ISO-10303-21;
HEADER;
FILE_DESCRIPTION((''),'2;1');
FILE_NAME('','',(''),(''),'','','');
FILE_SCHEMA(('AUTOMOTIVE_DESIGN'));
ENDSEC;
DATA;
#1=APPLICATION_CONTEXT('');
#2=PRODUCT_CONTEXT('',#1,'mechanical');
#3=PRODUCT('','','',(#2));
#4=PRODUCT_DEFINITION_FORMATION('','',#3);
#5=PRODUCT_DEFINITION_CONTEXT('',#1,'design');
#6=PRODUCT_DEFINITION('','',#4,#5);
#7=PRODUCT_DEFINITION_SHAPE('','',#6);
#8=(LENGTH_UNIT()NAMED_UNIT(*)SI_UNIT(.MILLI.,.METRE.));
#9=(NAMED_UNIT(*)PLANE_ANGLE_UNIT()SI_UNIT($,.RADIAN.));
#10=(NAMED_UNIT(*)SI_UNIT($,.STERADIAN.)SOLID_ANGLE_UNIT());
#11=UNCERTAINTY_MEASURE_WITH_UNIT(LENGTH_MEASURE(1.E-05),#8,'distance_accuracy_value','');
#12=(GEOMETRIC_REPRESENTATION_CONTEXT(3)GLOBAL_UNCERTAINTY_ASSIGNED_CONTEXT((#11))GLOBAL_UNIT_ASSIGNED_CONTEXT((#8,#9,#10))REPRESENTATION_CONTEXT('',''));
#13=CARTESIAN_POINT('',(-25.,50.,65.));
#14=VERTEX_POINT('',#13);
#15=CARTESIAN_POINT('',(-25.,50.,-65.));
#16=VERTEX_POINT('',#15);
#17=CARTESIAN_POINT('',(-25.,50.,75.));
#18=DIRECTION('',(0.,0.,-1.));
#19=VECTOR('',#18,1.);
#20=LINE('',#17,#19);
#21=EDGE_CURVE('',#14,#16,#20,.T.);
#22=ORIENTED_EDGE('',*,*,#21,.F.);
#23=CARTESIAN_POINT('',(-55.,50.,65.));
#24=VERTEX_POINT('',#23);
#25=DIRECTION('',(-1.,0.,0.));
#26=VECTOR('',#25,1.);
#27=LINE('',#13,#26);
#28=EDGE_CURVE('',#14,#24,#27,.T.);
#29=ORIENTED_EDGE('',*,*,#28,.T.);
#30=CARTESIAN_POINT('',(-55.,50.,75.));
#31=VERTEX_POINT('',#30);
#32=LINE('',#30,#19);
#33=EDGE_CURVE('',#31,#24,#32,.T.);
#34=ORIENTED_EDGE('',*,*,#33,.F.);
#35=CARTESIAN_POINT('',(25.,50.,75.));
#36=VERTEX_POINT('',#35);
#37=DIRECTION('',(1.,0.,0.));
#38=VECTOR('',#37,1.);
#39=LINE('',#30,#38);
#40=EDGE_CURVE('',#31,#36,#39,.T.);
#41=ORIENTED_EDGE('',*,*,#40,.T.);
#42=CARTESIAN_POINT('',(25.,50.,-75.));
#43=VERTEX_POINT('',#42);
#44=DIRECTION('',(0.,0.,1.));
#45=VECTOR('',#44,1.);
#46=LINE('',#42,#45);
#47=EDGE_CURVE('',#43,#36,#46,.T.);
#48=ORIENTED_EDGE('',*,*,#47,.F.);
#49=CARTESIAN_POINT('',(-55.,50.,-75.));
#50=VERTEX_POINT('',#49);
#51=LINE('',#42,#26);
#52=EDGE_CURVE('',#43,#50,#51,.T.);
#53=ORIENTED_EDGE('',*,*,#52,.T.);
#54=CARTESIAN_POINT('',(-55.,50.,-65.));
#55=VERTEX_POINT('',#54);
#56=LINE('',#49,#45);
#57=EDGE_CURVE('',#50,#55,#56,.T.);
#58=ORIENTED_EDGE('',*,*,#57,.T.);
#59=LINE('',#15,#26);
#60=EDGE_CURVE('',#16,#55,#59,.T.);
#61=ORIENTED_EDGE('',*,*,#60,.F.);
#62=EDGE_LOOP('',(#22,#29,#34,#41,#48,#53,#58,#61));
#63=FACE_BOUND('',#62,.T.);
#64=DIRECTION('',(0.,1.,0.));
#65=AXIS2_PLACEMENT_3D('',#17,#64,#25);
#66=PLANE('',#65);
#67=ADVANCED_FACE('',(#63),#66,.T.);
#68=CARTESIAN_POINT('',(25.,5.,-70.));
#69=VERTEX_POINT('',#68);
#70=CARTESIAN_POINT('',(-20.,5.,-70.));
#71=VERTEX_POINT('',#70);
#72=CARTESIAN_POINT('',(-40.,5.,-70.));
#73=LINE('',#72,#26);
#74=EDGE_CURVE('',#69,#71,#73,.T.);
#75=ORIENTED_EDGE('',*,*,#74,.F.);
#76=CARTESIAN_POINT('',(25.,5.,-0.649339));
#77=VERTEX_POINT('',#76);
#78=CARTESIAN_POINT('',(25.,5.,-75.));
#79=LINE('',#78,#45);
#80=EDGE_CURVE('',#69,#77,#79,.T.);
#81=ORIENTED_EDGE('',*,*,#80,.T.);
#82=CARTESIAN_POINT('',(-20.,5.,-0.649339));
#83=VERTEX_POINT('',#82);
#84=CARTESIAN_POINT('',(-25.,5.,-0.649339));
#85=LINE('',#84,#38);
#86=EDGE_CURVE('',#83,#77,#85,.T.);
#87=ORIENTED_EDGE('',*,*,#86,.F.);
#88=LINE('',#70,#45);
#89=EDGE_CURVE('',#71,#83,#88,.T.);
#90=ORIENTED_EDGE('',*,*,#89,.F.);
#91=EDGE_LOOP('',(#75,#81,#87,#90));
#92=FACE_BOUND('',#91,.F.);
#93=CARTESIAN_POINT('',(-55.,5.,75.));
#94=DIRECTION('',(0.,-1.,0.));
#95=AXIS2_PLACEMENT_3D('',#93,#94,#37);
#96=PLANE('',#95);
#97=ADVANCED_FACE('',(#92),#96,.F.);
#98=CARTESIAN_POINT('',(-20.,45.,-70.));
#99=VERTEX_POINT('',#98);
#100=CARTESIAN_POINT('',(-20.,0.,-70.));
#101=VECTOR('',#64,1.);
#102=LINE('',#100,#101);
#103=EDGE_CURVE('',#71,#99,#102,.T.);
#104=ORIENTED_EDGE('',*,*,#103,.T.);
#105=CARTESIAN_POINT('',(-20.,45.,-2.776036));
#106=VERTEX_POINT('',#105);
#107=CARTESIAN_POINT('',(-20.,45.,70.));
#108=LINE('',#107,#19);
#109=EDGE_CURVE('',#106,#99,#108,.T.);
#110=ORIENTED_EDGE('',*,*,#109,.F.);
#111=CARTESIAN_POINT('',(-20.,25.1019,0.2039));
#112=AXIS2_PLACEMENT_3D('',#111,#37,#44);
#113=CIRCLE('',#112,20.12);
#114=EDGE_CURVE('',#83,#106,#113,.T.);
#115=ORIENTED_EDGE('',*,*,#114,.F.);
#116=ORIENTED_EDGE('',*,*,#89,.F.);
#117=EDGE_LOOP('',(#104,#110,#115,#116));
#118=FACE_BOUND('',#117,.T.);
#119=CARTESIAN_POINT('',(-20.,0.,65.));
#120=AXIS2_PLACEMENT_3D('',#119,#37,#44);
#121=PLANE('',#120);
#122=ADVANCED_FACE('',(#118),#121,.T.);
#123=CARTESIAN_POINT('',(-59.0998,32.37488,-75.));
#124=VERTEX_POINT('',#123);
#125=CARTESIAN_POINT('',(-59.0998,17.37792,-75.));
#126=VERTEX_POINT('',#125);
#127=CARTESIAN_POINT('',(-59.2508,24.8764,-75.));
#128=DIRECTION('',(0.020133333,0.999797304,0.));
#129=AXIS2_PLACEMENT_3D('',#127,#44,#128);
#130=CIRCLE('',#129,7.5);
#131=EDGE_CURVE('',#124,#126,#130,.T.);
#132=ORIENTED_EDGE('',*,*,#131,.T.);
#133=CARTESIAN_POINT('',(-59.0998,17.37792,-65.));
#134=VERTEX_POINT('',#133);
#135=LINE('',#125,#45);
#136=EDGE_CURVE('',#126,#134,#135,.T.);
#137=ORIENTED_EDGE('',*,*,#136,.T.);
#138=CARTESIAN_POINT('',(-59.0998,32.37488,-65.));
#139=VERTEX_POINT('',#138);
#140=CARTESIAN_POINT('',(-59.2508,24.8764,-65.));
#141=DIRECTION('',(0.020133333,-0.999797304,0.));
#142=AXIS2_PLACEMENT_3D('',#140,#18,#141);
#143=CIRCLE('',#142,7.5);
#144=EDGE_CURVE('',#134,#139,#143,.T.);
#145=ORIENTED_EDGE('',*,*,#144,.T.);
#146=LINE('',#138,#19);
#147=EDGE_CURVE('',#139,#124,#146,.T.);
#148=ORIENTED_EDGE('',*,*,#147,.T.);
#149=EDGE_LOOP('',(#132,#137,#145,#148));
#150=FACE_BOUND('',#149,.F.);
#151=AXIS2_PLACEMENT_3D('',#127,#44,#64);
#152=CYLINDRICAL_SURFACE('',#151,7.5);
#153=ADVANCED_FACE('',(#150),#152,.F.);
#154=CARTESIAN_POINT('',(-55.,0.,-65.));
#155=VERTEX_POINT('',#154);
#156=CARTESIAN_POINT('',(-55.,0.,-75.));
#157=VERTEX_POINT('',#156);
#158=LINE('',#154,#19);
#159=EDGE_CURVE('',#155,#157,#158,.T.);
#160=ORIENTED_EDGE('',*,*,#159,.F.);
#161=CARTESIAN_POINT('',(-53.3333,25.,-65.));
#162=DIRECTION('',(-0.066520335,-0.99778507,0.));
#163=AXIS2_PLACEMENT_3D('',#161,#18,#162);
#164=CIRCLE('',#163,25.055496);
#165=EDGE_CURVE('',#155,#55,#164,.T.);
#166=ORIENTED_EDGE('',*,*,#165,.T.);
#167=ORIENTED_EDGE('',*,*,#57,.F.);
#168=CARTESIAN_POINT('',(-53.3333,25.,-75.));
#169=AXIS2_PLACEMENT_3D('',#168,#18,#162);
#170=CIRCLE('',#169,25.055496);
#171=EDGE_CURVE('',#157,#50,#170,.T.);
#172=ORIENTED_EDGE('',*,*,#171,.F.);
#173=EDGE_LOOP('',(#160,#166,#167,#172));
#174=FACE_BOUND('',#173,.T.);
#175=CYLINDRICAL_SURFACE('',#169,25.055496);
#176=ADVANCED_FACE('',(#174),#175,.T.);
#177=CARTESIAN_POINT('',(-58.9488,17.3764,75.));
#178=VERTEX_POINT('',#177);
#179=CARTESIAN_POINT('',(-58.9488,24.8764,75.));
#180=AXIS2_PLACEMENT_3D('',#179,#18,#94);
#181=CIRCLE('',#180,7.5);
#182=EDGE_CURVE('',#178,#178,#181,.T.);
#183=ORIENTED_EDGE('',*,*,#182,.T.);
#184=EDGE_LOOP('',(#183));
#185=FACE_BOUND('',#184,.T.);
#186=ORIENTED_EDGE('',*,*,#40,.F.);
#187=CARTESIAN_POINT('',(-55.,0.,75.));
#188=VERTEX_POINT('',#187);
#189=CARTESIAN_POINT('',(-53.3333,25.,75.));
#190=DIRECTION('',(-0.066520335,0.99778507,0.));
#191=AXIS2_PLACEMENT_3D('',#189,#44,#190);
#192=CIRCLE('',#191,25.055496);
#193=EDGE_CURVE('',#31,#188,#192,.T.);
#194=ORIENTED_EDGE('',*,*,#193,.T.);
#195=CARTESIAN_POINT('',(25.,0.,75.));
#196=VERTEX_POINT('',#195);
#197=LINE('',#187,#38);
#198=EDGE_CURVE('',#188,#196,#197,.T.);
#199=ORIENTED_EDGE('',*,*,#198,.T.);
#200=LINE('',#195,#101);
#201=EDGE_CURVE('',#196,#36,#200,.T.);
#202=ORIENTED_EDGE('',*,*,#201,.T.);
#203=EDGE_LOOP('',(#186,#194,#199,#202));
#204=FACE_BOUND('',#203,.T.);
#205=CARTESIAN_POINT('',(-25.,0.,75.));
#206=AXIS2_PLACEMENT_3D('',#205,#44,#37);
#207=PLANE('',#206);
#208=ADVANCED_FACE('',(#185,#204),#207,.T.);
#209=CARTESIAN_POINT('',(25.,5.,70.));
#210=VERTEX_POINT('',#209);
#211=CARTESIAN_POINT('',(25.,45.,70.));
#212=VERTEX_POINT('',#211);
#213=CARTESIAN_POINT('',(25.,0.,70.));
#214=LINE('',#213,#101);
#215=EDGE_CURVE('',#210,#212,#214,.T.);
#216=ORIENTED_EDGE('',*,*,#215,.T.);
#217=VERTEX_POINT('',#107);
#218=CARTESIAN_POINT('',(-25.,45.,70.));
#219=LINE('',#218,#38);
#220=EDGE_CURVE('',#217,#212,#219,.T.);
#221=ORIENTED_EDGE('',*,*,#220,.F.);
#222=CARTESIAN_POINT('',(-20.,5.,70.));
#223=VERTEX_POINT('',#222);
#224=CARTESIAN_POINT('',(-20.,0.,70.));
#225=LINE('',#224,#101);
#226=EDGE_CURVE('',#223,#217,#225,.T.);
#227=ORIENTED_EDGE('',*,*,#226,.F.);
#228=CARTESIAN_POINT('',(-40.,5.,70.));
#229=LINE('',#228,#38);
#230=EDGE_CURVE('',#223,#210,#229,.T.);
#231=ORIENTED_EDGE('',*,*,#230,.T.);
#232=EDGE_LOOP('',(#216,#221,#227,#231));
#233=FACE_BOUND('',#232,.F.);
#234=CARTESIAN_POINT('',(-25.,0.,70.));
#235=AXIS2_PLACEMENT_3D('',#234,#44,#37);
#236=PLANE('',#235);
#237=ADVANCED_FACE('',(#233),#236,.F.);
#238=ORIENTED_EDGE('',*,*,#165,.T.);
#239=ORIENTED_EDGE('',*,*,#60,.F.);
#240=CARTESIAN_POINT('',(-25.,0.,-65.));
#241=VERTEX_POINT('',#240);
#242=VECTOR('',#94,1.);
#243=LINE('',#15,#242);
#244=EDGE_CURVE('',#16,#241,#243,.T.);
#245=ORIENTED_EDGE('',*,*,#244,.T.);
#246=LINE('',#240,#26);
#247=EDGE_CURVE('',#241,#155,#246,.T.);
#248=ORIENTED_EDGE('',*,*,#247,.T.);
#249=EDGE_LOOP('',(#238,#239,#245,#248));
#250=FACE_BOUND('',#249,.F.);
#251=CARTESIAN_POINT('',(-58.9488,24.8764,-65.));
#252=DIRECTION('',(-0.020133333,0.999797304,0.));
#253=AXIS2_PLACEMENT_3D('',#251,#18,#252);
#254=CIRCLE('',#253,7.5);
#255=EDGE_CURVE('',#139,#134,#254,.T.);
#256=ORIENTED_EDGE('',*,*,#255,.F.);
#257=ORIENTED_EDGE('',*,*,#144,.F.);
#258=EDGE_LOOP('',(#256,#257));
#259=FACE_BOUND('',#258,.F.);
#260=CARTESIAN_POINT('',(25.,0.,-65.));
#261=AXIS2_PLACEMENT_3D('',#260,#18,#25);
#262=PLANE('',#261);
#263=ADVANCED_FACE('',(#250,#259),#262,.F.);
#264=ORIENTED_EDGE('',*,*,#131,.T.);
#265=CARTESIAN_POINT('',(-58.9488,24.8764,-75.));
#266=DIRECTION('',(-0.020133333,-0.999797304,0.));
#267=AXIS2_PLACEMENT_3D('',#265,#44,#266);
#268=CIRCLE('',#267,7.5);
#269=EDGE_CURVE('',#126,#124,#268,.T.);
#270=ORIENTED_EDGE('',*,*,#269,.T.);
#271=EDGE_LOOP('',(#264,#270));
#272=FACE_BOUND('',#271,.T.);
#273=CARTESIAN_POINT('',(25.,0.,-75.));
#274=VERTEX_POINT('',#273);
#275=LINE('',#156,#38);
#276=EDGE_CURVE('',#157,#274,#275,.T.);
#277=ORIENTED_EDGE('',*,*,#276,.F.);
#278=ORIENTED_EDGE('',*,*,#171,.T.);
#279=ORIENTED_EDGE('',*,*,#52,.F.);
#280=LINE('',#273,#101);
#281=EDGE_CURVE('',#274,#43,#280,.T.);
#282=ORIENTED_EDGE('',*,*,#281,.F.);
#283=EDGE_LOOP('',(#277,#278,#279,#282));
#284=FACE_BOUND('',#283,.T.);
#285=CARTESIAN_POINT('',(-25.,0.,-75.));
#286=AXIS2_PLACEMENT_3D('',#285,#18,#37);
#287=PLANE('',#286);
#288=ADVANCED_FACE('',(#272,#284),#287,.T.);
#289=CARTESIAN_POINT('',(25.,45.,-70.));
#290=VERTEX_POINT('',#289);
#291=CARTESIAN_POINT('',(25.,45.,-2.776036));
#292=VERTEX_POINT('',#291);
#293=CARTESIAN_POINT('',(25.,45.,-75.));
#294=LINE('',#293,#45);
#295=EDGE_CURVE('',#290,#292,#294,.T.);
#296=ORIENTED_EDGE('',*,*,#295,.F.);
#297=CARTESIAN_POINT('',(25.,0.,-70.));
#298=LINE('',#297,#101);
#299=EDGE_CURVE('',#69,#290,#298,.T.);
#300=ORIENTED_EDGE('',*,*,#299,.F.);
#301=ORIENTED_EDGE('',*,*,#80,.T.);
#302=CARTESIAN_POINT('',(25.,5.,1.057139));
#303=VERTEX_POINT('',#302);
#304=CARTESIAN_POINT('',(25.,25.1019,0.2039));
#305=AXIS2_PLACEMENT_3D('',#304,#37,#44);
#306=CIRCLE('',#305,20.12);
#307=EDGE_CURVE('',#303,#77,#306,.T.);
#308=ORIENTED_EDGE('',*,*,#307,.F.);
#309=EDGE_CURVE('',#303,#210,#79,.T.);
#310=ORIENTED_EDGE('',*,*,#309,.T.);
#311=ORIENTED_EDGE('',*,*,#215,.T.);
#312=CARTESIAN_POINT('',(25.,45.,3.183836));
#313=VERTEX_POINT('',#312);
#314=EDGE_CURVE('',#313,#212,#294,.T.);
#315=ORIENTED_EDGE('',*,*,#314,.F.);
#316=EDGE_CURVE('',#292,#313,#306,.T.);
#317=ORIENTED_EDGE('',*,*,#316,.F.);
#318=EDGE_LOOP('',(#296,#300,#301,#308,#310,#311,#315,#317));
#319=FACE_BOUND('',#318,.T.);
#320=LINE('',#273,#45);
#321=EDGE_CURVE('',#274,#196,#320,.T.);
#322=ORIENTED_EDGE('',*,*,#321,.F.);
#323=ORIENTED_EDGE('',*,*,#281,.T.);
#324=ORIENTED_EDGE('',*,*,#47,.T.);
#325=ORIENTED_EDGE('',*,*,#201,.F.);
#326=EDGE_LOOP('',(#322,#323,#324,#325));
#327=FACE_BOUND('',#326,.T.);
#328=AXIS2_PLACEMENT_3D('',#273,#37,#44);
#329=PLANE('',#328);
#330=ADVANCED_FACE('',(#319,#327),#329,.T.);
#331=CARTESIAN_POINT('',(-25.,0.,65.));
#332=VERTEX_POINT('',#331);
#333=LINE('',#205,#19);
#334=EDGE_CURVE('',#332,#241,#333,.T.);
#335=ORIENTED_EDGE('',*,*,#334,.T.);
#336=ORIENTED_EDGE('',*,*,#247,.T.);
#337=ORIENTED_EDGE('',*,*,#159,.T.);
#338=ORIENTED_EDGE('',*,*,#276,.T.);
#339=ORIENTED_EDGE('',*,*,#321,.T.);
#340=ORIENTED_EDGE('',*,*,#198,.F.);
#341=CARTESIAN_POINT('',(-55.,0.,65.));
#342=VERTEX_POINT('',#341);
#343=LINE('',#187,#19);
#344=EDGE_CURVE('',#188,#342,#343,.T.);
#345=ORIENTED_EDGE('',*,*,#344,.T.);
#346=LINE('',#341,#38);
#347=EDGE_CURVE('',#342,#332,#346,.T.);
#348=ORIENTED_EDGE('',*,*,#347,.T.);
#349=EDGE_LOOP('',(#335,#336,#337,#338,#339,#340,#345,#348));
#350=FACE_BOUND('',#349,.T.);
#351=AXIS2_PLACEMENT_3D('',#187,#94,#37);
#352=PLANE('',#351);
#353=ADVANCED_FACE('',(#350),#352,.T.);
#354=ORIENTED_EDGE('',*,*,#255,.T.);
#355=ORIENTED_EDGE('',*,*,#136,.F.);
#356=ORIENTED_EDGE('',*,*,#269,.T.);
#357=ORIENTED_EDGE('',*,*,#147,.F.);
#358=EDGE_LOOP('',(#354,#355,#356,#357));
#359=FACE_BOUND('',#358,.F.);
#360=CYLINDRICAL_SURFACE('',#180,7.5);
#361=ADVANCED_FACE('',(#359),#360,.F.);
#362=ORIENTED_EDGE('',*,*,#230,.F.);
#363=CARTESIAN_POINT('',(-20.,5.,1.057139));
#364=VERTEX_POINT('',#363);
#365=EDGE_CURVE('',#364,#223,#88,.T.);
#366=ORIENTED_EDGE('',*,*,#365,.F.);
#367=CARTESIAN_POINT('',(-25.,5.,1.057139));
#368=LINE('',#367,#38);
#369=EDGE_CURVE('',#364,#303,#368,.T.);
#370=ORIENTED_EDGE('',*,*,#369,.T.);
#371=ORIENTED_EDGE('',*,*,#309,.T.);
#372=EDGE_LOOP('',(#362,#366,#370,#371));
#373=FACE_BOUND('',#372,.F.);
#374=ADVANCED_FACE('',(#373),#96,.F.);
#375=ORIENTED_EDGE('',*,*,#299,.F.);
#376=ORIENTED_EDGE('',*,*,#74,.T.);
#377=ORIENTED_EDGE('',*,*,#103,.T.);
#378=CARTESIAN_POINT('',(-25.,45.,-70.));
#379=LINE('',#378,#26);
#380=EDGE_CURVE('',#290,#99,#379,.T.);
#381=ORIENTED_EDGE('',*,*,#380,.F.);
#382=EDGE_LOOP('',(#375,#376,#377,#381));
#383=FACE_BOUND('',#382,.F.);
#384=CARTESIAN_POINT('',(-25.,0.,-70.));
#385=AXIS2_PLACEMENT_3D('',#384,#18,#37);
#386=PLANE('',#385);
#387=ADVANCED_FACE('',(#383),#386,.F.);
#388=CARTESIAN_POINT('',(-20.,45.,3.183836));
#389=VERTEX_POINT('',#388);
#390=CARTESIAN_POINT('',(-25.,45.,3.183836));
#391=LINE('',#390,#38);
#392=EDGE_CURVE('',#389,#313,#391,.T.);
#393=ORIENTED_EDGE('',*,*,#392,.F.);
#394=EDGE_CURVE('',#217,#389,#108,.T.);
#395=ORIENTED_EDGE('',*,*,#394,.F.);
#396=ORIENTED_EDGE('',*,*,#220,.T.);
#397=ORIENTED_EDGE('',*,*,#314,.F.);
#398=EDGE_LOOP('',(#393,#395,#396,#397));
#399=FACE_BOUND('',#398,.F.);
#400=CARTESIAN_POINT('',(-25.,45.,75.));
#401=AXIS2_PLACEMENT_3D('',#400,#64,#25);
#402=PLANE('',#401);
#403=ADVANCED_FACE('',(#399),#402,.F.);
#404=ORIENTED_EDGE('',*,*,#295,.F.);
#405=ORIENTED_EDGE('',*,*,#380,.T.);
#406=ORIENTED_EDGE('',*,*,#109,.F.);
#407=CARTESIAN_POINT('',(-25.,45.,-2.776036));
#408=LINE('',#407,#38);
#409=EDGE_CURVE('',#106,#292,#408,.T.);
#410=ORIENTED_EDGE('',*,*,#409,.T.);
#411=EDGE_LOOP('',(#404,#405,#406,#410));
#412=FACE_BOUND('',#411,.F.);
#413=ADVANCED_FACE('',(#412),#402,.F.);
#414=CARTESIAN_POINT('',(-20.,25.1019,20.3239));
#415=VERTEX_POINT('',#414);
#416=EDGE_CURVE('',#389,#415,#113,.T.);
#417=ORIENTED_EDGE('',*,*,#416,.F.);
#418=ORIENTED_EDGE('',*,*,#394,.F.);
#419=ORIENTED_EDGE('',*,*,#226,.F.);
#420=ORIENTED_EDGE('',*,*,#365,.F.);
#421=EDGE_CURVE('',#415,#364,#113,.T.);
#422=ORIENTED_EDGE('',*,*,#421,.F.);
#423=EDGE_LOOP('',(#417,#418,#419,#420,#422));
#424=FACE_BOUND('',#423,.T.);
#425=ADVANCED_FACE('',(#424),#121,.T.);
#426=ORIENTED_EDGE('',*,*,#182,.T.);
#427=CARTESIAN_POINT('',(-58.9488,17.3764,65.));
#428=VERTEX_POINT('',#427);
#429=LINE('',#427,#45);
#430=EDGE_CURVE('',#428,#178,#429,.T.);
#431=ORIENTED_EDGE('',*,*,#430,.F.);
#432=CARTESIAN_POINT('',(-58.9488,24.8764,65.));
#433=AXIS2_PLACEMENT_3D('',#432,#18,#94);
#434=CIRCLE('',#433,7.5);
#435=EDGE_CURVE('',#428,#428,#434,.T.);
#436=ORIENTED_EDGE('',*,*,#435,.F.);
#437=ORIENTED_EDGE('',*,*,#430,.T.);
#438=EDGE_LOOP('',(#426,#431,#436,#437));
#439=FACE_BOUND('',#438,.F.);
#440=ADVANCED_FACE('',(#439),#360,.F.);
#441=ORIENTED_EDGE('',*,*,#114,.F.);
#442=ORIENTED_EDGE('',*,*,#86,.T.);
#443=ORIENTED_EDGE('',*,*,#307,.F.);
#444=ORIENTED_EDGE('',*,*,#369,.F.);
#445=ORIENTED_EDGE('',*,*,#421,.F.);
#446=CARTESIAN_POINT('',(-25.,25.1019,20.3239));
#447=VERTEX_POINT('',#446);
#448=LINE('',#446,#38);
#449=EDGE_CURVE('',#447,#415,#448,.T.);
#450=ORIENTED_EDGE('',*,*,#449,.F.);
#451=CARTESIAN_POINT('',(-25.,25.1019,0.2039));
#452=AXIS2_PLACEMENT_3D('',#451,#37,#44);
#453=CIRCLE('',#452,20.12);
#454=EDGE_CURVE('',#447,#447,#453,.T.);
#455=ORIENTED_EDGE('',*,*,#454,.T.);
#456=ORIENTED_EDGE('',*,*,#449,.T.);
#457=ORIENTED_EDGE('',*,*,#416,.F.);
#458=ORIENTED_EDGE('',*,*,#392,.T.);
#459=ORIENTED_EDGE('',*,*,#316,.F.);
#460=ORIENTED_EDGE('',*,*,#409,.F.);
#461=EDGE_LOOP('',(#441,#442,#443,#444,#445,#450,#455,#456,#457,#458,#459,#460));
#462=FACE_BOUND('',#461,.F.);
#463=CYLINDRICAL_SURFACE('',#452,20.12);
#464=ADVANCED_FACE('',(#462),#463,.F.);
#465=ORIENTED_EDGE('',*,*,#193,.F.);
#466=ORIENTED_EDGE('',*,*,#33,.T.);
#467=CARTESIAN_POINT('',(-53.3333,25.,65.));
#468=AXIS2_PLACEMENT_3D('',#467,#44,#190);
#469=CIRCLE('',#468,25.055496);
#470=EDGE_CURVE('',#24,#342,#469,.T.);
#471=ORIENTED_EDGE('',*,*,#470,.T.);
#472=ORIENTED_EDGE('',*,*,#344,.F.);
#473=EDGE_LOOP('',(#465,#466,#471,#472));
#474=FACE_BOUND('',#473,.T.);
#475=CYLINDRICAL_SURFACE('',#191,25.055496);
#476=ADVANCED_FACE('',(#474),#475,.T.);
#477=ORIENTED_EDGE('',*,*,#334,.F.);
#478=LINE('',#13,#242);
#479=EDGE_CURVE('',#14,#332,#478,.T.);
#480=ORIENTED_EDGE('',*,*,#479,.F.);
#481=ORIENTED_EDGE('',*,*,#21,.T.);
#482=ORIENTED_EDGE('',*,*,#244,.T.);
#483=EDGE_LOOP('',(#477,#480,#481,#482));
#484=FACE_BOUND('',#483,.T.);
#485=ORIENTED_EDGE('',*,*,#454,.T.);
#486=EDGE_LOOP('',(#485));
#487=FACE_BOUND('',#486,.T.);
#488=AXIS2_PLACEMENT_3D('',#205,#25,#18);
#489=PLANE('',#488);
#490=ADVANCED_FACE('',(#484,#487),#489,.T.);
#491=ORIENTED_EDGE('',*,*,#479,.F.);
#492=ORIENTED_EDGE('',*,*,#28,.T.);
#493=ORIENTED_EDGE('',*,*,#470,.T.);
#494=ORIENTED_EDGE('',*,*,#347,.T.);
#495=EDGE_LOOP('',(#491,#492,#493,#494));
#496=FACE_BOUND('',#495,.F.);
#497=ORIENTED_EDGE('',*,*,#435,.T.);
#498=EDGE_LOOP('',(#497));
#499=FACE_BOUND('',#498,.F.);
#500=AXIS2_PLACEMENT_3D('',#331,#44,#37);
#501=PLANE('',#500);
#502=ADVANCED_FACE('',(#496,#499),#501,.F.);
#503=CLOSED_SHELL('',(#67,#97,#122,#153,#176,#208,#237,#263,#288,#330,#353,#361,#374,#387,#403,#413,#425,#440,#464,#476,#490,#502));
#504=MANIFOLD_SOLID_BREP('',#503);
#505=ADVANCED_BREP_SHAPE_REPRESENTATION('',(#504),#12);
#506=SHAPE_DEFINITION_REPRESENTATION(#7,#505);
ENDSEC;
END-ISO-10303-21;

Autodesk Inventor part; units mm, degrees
ref_plane "YZ Plane" through (0, 0, 0) normal (1, 0, 0) x (0, 1, 0)
ref_plane "XZ Plane" through (0, 0, 0) normal (0, 1, 0) x (-1, 0, 0)
sketch "Boceto1" plane through (0, 0, 0) normal (0, 1, 0) x (-1, 0, 0)
  line L0 (-25, 75) -> (25, 75)
  line L1 (25, 75) -> (25, -75)
  line L2 (25, -75) -> (-25, -75)
  line L3 (-25, -75) -> (-25, 75)
  line L4 (-25, 75) -> (25, -75) construction
  line L5 (25, 75) -> (-25, -75) construction
  point P0 (0, 0)
  dimension "d0" = 50
  dimension "d1" = 150
extrude "Extrusión1" add sketch "Boceto1" along normal blind 50
sketch "Boceto2" plane through (25, 0, -75) normal (0, 0, -1) x (-1, 0, 0)
  line L0 (50, 50) -> (0, 50) projected
  line L1 (50, 50) -> (80, 50)
  line L2 (0, 0) -> (50, 0) projected
  line L3 (50, 0) -> (80, 0)
  arc A0 (80, 0) -> (80, 50) centre (78.3333, 25) ccw
  line L4 (50, 0) -> (50, 50) projected
  line L5 (50, 50) -> (50, 0)
  point P0 (25, 0)
  dimension "d4" = 30
  dimension "d5" = 30
extrude "Extrusión2" add sketch "Boceto2" against normal blind 10
ref_plane "Plano de trabajo1" through (0, 25, 0) normal (0, 1, 0) x (1, 0, 0)
sketch "Boceto3" plane through (25, 0, -75) normal (0, 0, -1) x (-1, 0, 0)
  point P0 (25, 0)
  point P1 (84.2508, 24.8764)
hole "Agujero1" at (-59.2508, 24.8764, -75) direction (0, 0, 1) diameter 15 end through all
sketch "Boceto4" plane through (-25, 0, 75) normal (0, 0, 1) x (1, 0, 0)
  arc A0 (-30, 50) -> (-30, 0) centre (-28.3333, 25) ccw projected
  line L0 (0, 50) -> (-30, 50) projected
  line L1 (-30, 0) -> (0, 0) projected
  line L2 (0, 0) -> (0, 50) projected
  point P0 (25, 0)
extrude "Extrusión3" add sketch "Boceto4" against normal blind 10
sketch "Boceto5" plane through (25, 0, 75) normal (0, 0, 1) x (1, 0, 0)
  point P0 (-25, 0)
  point P1 (-83.9488, 24.8764)
hole "Agujero2" at (-58.9488, 24.8764, 75) direction (0, 0, -1) diameter 15 end through all
sketch "Boceto6" plane through (25, 0, 75) normal (1, 0, 0) x (0, 0, -1)
  point P0 (75, 0)
shell "Vaciado1" thickness 5 removed faces 1 at (25, 16.6667, -25)
sketch "Boceto7" plane through (-25, 0, -65) normal (-1, 0, 0) x (0, 0, 1)
  point P0 (65, 0)
  point P1 (65.2039, 25.1019)
hole "Agujero3" at (-25, 25.1019, 0.2039) direction (1, 0, 0) diameter 40.24 end through all
properties part number "primer rotor"
